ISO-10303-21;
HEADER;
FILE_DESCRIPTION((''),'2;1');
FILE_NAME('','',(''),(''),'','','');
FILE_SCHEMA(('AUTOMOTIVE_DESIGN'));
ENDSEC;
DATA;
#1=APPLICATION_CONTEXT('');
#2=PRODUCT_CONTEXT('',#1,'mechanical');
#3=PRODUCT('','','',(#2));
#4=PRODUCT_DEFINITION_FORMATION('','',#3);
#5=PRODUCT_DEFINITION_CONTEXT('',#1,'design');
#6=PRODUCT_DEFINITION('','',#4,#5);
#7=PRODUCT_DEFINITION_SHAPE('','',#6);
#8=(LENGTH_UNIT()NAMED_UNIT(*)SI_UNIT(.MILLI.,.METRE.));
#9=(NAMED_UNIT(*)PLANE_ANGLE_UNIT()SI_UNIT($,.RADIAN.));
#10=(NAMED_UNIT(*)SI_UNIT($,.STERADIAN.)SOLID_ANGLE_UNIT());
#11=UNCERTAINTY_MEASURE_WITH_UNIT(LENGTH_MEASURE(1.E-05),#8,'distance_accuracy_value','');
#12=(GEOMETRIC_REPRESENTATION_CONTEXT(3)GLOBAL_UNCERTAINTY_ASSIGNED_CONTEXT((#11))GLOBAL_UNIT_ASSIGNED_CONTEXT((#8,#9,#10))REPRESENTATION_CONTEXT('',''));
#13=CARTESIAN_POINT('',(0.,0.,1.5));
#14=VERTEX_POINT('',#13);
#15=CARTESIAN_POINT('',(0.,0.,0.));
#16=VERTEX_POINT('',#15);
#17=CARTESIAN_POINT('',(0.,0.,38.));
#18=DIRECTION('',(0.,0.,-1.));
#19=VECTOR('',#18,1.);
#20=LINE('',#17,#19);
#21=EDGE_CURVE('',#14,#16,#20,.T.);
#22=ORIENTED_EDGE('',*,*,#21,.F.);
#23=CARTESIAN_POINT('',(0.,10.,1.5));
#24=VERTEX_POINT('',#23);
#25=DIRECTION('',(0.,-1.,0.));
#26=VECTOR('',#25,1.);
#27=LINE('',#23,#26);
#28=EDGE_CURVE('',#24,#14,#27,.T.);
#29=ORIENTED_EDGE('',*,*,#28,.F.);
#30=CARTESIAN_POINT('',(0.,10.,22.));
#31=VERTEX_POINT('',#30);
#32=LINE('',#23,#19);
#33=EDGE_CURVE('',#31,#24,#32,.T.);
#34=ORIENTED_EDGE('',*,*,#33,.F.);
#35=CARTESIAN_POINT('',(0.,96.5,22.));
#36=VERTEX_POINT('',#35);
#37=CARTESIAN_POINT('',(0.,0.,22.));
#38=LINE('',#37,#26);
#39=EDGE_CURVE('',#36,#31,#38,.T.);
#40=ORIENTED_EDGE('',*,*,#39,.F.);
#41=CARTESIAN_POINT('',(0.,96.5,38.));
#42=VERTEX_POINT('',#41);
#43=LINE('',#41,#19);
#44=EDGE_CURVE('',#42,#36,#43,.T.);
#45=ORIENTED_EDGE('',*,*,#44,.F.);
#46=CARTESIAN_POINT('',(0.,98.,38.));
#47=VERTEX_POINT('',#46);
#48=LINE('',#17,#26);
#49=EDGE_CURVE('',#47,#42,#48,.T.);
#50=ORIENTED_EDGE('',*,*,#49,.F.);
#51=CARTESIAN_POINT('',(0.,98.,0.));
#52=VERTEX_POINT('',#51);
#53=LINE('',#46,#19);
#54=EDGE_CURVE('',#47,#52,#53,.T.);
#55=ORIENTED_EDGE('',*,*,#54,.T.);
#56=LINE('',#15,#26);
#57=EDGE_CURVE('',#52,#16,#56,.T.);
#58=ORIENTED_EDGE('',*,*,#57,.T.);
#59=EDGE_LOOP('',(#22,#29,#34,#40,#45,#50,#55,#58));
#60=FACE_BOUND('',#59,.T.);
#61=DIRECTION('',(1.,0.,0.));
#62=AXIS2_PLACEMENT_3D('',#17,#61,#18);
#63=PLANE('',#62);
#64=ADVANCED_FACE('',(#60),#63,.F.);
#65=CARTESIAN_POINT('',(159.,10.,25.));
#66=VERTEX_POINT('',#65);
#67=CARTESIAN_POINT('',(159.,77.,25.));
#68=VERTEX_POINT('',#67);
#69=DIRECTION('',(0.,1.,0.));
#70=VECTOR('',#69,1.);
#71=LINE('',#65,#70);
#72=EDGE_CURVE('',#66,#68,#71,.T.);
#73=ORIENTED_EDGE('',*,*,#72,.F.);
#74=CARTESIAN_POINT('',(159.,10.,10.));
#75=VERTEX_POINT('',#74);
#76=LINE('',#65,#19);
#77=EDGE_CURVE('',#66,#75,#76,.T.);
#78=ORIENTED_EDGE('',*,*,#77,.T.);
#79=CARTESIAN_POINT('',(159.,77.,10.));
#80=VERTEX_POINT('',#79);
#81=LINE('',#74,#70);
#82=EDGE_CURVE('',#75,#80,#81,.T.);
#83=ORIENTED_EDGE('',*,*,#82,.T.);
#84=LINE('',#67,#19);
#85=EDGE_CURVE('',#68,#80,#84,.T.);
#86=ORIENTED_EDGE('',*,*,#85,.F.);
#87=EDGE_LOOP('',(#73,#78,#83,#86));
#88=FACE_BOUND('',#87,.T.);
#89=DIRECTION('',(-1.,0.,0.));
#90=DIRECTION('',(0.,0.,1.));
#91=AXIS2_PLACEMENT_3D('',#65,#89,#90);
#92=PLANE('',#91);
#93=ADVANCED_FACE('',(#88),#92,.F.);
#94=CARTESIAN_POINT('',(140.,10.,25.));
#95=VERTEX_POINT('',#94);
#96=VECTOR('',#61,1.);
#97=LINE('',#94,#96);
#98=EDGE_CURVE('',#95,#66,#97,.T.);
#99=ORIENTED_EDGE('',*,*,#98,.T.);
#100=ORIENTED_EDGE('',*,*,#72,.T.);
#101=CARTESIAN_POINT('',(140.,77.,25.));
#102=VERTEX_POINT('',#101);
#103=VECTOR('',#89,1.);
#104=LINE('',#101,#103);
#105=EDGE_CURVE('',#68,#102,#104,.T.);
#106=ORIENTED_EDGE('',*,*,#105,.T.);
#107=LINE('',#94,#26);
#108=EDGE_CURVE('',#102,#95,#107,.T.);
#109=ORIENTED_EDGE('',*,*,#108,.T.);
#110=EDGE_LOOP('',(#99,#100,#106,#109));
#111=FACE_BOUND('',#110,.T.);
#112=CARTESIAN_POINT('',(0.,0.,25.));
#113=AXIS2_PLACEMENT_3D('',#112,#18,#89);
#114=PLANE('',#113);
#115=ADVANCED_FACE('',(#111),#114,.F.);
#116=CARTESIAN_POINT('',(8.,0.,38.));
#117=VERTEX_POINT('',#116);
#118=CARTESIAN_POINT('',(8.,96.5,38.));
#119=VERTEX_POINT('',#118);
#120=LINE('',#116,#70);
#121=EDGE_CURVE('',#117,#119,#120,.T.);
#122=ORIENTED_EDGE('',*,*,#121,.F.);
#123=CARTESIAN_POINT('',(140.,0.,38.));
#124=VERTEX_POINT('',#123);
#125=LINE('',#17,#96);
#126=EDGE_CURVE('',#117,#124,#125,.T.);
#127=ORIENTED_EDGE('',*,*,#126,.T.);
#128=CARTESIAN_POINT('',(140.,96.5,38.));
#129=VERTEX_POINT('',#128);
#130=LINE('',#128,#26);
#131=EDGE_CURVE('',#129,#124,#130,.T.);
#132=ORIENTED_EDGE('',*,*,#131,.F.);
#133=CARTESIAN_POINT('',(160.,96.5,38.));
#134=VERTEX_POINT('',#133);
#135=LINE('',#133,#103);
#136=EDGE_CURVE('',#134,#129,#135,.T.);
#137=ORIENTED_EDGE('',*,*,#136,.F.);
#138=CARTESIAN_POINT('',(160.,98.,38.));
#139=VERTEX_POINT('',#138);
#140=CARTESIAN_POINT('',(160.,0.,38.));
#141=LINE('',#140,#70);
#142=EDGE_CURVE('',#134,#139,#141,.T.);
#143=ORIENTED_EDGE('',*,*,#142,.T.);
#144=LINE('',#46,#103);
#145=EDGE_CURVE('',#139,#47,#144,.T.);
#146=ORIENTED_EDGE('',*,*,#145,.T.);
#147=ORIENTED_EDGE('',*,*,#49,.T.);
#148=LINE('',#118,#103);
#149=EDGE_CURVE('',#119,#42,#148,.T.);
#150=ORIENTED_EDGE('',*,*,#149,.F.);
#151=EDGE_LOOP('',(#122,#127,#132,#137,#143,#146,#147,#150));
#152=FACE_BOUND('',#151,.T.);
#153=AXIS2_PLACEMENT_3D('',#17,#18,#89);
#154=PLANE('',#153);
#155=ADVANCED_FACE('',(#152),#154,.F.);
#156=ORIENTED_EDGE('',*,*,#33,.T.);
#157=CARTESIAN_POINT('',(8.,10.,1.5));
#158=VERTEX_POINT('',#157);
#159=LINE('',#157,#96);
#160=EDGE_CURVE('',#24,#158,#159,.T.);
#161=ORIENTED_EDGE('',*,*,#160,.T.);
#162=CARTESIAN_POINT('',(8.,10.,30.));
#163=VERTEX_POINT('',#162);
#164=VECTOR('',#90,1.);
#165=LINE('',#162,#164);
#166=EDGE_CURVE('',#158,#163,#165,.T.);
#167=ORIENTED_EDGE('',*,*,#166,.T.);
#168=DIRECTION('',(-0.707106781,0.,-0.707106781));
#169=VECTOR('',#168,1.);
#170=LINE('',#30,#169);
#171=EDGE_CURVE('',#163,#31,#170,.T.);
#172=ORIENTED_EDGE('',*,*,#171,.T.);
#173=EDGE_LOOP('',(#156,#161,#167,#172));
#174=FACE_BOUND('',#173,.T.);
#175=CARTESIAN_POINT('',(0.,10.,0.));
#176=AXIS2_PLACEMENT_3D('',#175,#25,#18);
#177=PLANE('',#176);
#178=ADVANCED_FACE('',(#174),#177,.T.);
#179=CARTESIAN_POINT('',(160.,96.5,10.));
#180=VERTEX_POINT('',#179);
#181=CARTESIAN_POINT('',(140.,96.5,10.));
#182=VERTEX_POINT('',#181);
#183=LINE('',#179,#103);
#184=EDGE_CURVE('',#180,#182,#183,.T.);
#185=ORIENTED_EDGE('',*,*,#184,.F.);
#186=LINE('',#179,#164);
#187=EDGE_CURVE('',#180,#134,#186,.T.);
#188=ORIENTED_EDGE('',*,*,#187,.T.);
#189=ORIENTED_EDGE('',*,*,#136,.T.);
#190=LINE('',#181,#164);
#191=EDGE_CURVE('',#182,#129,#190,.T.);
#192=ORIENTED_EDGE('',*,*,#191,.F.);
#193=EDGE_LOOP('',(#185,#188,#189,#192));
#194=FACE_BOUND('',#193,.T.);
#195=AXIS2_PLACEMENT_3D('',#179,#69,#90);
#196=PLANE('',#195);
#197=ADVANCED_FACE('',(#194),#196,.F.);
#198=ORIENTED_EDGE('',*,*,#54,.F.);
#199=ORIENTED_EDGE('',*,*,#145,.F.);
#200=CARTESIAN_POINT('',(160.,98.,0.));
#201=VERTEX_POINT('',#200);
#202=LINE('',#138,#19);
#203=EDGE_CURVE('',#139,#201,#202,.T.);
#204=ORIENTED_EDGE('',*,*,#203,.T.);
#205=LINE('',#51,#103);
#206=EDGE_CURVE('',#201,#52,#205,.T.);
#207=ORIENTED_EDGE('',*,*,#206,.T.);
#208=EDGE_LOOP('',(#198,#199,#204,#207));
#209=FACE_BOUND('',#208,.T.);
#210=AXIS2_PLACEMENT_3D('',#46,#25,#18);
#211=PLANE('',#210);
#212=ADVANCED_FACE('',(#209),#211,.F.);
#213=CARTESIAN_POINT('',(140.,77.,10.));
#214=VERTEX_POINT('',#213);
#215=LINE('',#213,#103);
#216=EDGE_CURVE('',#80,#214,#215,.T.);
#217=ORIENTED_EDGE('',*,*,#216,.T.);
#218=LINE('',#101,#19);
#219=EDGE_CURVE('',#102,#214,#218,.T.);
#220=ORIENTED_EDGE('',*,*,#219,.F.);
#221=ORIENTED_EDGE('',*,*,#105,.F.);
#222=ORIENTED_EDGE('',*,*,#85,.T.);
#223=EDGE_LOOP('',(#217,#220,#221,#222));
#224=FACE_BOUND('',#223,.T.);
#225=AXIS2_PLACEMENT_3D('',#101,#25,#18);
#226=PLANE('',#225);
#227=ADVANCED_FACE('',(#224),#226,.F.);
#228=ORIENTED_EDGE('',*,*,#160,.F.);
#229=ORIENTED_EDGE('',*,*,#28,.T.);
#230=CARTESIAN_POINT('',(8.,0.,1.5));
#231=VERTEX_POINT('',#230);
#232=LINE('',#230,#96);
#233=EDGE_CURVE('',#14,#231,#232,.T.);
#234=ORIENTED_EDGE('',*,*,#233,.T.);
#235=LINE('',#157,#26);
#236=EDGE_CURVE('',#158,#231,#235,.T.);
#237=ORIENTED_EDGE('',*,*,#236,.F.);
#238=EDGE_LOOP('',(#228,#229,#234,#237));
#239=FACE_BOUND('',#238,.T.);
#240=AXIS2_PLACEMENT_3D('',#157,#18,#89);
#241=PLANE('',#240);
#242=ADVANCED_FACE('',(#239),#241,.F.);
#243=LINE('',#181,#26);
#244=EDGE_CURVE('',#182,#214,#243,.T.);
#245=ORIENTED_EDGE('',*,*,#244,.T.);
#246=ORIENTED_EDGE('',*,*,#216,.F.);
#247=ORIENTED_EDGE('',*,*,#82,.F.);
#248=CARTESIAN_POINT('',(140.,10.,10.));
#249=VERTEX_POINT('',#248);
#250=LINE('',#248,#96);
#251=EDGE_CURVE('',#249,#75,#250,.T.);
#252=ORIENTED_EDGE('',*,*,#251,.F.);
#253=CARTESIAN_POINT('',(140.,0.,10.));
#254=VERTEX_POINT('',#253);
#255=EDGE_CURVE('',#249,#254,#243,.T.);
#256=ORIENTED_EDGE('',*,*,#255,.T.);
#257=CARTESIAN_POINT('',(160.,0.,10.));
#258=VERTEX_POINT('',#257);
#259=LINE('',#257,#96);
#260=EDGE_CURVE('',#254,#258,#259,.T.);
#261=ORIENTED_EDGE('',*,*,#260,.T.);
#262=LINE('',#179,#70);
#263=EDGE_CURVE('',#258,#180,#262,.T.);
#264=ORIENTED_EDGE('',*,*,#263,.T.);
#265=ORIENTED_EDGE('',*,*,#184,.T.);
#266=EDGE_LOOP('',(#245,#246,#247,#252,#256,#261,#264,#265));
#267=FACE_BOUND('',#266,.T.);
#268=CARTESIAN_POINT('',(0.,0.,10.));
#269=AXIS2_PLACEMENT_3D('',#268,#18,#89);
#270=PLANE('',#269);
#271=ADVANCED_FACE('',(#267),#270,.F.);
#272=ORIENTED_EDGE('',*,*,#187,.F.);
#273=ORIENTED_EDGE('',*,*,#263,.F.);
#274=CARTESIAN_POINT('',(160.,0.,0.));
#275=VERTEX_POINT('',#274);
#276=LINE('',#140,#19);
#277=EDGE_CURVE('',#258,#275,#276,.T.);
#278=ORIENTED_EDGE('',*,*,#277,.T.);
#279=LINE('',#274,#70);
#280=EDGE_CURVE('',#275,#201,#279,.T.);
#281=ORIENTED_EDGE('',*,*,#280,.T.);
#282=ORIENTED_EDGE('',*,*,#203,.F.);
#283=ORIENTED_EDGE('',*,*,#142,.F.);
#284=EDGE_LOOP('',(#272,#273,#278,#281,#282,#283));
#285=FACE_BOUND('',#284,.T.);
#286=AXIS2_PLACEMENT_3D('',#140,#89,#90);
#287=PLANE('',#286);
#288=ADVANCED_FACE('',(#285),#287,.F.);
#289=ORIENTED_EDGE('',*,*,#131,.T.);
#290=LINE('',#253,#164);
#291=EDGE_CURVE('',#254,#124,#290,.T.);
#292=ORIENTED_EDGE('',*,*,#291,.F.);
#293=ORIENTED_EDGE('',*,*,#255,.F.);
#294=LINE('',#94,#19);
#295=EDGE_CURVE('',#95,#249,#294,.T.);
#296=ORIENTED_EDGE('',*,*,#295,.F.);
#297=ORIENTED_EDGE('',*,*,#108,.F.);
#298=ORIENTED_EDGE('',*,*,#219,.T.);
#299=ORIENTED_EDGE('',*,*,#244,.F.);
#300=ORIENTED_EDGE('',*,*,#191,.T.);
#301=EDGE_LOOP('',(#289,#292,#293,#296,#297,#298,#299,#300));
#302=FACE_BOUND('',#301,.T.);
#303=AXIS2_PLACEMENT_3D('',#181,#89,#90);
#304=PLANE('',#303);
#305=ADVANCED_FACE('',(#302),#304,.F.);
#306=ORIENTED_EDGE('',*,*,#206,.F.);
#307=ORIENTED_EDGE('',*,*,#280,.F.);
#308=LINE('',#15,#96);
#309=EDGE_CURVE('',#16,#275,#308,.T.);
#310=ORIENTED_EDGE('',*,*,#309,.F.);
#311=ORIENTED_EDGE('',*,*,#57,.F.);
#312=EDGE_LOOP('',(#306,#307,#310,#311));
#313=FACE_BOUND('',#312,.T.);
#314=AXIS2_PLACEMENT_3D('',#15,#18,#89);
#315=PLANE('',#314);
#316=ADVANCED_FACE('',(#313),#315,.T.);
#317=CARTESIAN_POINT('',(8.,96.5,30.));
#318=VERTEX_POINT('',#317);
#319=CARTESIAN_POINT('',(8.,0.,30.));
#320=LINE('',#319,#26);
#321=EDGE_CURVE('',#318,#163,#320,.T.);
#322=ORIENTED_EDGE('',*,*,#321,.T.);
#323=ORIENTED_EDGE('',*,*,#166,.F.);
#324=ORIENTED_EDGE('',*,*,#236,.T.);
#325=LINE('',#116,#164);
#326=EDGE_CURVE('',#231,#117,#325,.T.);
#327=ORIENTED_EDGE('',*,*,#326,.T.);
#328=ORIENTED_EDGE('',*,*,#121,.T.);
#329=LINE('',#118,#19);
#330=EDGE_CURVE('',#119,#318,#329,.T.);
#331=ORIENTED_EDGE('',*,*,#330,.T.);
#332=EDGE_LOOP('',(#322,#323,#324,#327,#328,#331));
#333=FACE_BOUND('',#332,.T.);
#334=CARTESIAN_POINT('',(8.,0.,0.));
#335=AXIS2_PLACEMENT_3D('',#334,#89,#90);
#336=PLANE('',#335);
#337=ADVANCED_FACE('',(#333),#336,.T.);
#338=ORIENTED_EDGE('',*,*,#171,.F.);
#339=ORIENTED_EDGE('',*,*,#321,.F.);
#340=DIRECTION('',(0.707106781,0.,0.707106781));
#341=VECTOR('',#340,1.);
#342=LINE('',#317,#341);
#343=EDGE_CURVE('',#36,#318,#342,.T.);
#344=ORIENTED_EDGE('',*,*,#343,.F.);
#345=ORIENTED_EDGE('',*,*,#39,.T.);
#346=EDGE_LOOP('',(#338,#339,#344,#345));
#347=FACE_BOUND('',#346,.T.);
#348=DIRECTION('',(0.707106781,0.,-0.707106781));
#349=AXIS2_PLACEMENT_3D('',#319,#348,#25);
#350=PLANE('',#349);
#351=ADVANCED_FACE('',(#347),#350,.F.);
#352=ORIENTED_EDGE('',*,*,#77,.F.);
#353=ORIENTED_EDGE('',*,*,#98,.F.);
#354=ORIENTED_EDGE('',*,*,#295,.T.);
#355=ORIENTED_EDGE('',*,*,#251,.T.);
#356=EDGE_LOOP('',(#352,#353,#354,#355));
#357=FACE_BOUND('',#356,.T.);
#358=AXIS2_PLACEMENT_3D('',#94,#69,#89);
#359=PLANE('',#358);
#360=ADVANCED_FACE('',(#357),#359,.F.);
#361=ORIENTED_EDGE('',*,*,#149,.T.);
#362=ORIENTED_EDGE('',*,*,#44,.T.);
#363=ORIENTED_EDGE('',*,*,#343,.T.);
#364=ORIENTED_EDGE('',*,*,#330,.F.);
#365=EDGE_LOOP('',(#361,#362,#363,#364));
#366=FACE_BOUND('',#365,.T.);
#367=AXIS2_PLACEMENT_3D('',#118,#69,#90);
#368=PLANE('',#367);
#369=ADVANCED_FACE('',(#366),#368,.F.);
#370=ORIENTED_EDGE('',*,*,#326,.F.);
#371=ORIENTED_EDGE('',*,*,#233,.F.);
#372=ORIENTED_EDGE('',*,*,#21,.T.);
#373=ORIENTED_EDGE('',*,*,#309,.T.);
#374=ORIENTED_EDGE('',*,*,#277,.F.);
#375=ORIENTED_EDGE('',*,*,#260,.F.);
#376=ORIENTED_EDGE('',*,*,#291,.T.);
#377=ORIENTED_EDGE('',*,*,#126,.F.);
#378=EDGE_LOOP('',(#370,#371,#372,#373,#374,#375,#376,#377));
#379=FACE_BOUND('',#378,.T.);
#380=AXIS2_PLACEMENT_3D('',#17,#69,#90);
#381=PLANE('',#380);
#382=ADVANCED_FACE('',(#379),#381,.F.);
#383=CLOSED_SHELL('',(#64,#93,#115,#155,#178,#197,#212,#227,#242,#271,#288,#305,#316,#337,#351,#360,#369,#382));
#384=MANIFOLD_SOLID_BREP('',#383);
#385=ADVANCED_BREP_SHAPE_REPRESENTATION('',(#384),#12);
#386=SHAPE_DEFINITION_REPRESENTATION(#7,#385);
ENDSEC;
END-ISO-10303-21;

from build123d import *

# Parameters (mm, degrees)
SKETCH_1_W          = 160
SKETCH_1_H          = 98
EXTRUDE_1_DEPTH     = 38
SKETCH_2_W          = 20
SKETCH_2_H          = 96.5
CUT_EXTRUDE_1_DEPTH = 28
SKETCH_3_W          = 19
SKETCH_3_H          = 67
EXTRUDE_2_DEPTH     = 15
SKETCH_4_W          = 16
SKETCH_4_H          = 96.5
CUT_EXTRUDE_2_DEPTH = 8
CHAMFER_1_SIZE      = 8
CUT_EXTRUDE_3_DEPTH = 10


with BuildPart() as part:
    # 草图1 → 凸台-拉伸1 (new body)
    with BuildSketch(Plane.XY):
        with Locations((80, 49)):
            Rectangle(SKETCH_1_W, SKETCH_1_H)
    extrude(amount=EXTRUDE_1_DEPTH)

    # 草图2 → 切除-拉伸1 (cut)
    with BuildSketch(Plane.XY.offset(38)):
        with Locations((150, 48.25)):
            Rectangle(SKETCH_2_W, SKETCH_2_H)
    extrude(amount=-CUT_EXTRUDE_1_DEPTH, mode=Mode.SUBTRACT)

    # 草图3 → 凸台-拉伸2 (add)
    with BuildSketch(Plane.XY.offset(10)):
        with Locations((149.5, 43.5)):
            Rectangle(SKETCH_3_W, SKETCH_3_H)
    extrude(amount=EXTRUDE_2_DEPTH)

    # 草图4 → 切除-拉伸2 (cut)
    with BuildSketch(Plane.ZY):
        with Locations((30, 48.25)):
            Rectangle(SKETCH_4_W, SKETCH_4_H)
    extrude(amount=-CUT_EXTRUDE_2_DEPTH, mode=Mode.SUBTRACT)

    # 倒角1
    chamfer_1_edges = [part.edges().sort_by_distance(p)[0] for p in [
        (8, 48.25, 22),
    ]]
    chamfer(chamfer_1_edges, length=CHAMFER_1_SIZE - 0.0001)  # a hair under: the kernel refuses the full size

    # 草图5 → 切除-拉伸3 (cut)
    with BuildSketch(Plane.XZ):
        Polygon((0, 22), (8, 30), (8, 1.5), (0, 1.5), align=None)
    extrude(amount=-CUT_EXTRUDE_3_DEPTH, mode=Mode.SUBTRACT)


solid = part.part
